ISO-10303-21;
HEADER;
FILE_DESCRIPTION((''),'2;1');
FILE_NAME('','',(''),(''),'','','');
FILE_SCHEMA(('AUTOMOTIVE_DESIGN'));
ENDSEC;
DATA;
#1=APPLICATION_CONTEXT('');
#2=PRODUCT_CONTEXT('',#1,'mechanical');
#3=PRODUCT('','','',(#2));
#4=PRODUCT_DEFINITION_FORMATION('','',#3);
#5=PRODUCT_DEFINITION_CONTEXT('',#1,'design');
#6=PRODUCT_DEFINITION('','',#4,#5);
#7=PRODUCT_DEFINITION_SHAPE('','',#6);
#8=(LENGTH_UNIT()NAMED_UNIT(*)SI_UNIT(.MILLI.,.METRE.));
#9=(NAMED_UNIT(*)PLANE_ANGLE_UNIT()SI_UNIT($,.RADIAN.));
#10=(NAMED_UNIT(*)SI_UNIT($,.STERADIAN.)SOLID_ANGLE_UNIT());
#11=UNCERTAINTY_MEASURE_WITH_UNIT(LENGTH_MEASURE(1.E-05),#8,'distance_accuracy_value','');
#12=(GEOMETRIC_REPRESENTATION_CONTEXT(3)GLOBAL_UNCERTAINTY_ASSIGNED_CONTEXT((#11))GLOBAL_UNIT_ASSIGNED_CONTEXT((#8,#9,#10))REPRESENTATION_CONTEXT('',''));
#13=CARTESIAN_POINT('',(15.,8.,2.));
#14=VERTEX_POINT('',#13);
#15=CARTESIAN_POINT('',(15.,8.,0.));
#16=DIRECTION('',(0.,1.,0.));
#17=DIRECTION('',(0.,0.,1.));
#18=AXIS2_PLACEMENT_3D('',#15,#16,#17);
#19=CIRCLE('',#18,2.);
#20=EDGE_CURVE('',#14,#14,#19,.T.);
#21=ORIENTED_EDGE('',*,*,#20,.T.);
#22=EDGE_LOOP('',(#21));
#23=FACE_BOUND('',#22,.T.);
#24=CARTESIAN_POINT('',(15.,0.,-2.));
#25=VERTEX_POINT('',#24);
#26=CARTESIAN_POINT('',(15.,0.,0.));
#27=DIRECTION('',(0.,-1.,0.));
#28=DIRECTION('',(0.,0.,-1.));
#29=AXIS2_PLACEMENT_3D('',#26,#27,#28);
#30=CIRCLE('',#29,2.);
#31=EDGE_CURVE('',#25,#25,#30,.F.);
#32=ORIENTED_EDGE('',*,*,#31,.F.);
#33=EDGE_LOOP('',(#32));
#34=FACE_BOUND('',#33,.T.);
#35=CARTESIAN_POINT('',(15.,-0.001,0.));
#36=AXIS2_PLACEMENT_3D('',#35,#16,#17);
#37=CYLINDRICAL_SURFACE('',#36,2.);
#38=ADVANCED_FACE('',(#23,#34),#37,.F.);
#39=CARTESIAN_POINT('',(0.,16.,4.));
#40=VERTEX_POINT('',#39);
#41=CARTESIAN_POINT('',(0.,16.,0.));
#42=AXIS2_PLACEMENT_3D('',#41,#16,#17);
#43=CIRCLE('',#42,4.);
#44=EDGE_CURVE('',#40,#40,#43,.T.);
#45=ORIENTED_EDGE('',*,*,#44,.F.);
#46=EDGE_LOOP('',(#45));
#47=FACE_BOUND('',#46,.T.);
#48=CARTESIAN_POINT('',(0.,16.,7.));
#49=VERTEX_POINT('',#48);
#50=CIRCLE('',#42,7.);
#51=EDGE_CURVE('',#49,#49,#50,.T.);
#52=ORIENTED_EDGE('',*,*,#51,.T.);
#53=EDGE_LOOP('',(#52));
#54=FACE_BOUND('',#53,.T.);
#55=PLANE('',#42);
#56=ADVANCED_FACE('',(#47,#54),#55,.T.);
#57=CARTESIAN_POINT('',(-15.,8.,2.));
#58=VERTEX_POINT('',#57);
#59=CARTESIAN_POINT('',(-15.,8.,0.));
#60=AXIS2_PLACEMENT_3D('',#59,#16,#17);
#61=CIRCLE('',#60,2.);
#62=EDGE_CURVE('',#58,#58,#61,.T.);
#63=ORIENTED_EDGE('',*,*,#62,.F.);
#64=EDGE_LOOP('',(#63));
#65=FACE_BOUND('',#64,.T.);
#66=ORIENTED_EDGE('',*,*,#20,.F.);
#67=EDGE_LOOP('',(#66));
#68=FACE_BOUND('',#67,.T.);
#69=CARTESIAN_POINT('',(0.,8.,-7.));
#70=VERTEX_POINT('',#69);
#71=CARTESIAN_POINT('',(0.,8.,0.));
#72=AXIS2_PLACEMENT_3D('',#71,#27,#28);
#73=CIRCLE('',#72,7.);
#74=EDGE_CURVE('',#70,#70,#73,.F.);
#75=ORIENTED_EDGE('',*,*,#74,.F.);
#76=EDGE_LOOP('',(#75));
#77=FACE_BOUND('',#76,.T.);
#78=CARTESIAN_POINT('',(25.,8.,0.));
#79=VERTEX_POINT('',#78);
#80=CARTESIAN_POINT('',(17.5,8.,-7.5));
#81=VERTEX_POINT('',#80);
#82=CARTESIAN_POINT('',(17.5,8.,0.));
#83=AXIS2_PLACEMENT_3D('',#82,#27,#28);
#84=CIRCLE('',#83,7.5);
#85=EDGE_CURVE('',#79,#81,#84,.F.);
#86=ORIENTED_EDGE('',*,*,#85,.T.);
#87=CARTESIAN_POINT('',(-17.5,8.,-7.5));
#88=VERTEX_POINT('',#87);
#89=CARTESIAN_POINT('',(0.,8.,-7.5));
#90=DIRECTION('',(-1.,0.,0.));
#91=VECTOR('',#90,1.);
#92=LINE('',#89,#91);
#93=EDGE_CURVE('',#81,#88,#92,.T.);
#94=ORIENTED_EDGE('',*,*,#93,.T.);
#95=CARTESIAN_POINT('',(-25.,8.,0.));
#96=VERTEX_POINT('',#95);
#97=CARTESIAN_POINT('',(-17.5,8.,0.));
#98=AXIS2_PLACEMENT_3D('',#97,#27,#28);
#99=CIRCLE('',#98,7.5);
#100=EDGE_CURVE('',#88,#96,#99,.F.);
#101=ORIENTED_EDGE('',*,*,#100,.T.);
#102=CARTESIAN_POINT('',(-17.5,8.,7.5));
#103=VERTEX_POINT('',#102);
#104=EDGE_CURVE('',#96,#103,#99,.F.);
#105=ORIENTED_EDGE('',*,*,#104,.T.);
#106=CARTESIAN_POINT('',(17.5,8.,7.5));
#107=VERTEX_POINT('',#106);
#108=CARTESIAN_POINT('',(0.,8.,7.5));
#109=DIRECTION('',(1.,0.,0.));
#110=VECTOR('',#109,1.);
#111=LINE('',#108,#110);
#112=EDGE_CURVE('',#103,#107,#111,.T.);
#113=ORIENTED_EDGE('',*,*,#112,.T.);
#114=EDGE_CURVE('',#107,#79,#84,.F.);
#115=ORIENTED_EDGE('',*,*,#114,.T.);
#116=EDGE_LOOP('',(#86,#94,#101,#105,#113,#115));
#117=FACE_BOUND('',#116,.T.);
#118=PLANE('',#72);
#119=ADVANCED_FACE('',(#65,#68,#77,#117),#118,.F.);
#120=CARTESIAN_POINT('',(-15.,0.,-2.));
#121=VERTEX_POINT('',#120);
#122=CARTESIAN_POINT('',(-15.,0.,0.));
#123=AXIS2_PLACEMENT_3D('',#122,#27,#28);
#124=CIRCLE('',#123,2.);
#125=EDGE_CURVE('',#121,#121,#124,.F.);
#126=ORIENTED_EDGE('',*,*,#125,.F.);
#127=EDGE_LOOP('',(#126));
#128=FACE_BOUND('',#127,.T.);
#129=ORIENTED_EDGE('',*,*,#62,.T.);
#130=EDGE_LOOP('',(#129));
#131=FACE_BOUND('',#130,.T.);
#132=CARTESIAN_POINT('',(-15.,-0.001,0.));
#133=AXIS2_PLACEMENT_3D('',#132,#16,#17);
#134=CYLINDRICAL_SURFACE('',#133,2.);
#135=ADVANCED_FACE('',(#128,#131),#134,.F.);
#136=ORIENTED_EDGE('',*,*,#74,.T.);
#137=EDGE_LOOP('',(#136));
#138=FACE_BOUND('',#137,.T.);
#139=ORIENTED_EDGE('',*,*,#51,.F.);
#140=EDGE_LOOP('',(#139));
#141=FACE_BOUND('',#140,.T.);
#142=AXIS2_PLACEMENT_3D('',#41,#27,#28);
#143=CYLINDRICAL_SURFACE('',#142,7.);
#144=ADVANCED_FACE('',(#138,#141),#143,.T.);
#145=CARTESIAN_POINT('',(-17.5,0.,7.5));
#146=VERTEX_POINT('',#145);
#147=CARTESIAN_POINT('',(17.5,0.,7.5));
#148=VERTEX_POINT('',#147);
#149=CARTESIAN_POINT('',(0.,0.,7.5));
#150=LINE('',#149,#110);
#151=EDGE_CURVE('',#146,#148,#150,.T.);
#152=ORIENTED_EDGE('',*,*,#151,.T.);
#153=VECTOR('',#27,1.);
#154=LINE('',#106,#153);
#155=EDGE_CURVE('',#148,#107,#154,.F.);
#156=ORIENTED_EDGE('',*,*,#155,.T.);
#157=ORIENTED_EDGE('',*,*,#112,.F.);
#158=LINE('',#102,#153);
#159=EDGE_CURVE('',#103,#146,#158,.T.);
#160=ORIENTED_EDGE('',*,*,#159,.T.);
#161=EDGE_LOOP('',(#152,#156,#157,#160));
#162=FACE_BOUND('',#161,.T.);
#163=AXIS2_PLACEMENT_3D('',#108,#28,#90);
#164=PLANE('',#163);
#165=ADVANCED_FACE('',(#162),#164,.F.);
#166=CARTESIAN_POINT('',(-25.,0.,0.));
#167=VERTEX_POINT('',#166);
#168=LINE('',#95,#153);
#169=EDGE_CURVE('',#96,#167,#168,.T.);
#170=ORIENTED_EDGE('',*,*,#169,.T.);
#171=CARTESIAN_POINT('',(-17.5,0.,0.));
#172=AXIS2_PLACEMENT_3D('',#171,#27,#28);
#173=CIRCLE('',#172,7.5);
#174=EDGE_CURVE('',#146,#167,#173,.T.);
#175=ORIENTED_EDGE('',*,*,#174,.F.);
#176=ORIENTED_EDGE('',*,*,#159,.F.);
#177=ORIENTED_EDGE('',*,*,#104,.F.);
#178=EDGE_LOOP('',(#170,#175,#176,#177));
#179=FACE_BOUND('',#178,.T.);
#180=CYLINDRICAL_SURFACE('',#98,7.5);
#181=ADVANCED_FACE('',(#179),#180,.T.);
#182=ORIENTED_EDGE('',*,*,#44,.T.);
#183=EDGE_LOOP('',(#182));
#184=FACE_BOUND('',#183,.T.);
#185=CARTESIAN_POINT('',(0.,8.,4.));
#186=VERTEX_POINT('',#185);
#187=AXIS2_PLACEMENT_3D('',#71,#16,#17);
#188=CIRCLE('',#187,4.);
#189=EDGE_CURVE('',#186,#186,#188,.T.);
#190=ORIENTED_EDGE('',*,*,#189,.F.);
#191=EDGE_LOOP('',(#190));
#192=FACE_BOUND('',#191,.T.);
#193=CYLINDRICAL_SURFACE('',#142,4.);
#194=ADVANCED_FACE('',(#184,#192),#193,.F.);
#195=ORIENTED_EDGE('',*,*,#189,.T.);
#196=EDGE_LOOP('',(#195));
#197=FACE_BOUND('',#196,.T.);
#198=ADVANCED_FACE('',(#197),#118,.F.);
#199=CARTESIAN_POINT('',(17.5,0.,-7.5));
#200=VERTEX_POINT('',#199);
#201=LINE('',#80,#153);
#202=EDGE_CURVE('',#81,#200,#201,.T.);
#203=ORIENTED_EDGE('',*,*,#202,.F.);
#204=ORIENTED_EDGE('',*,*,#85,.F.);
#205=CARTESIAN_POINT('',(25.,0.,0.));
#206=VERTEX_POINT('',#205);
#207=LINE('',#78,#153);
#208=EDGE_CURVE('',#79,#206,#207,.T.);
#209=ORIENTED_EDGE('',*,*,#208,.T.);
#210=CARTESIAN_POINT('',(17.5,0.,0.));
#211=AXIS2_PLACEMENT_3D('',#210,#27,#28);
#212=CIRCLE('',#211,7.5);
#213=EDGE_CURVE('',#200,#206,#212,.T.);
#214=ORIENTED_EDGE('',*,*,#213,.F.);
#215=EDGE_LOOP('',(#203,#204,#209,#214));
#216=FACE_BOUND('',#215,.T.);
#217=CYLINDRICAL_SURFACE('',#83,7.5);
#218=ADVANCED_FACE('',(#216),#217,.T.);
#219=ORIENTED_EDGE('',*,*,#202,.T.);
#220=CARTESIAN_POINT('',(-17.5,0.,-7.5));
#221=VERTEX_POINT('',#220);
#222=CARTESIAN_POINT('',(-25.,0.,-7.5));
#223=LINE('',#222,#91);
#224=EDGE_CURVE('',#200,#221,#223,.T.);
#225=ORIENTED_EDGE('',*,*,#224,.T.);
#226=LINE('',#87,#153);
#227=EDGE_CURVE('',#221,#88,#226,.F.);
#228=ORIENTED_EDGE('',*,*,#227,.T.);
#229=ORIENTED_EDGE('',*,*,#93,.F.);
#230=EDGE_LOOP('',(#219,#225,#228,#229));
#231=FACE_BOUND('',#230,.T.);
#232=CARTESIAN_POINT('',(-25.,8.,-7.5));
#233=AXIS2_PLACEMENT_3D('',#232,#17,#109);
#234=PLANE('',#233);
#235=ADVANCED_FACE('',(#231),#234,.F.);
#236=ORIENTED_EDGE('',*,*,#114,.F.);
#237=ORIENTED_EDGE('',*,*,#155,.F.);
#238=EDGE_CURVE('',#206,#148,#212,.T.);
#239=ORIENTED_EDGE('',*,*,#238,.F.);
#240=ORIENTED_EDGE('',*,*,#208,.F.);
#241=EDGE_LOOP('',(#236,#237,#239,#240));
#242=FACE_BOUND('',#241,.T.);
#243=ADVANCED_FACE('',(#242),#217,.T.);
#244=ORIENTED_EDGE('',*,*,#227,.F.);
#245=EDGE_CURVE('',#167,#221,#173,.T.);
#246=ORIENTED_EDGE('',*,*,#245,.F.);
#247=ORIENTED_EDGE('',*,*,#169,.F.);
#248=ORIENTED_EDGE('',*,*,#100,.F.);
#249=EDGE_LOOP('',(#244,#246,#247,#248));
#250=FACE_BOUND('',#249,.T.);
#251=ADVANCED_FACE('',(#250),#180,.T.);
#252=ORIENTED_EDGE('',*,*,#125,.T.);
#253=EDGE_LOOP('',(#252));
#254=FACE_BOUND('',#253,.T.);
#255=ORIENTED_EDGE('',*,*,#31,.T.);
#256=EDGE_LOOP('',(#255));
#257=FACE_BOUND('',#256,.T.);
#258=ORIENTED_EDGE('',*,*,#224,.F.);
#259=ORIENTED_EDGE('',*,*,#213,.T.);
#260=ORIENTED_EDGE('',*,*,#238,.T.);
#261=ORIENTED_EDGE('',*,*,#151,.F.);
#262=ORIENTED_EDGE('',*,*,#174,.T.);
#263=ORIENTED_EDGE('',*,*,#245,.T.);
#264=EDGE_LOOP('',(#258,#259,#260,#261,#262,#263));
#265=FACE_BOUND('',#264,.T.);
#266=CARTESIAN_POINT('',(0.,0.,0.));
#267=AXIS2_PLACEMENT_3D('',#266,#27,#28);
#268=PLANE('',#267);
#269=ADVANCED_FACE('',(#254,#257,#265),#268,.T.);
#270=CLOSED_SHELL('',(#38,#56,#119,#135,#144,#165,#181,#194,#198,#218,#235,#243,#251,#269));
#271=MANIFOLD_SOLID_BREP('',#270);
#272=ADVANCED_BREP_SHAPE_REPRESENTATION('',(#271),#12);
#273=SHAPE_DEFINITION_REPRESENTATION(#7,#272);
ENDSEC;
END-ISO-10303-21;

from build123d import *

# Parameters (mm, degrees)
BOSS_EXTRU_1_DEPTH      = 8
CONG_1_R                = 7.5
ENL_V_MAT_EXTRU_1_REACH = 29.299
ESQUISSE2_R             = 2
ESQUISSE3_R             = 7
ESQUISSE3_R_2           = 4
BOSS_EXTRU_2_DEPTH      = 8


with BuildPart() as part:
    # Esquisse1 → Boss.-Extru.1 (new body)
    with BuildSketch(Plane(origin=(0, 0, 0), x_dir=(1, 0, 0), z_dir=(0, 1, 0))):
        Polygon((0, -7.5), (25, -7.5), (25, 7.5), (0, 7.5), (-25, 7.5), (-25, -7.5), align=None)
    extrude(amount=BOSS_EXTRU_1_DEPTH)

    # Congé1
    cong_1_edges = [part.edges().sort_by_distance(p)[0] for p in [
        (-25, 4, 7.5),
        (-25, 4, -7.5),
        (25, 4, -7.5),
        (25, 4, 7.5),
    ]]
    fillet(cong_1_edges, radius=CONG_1_R - 0.0001)  # a hair under: the kernel refuses the full size

    # Esquisse2 → Enlèv. mat.-Extru.1 (cut, up to next)
    with BuildSketch(Plane(origin=(0, 8, 0), x_dir=(1, 0, 0), z_dir=(0, 1, 0)), mode=Mode.PRIVATE) as enl_v_mat_extru_1_sk1:
        with Locations(Location((-15, 0, 0), (0, 0, 270))):
            Circle(ESQUISSE2_R)
    enl_v_mat_extru_1_tool1 = extrude(enl_v_mat_extru_1_sk1.sketch, amount=-ENL_V_MAT_EXTRU_1_REACH, mode=Mode.PRIVATE) & part.part
    # Esquisse2 → Enlèv. mat.-Extru.1 (cut, up to next)
    with BuildSketch(Plane(origin=(0, 8, 0), x_dir=(1, 0, 0), z_dir=(0, 1, 0)), mode=Mode.PRIVATE) as enl_v_mat_extru_1_sk2:
        with Locations(Location((15, 0, 0), (0, 0, 270))):
            Circle(ESQUISSE2_R)
    enl_v_mat_extru_1_tool2 = extrude(enl_v_mat_extru_1_sk2.sketch, amount=-ENL_V_MAT_EXTRU_1_REACH, mode=Mode.PRIVATE) & part.part
    add(enl_v_mat_extru_1_tool1.solids().sort_by_distance((-15, 8, 0))[0], mode=Mode.SUBTRACT)
    add(enl_v_mat_extru_1_tool2.solids().sort_by_distance((15, 8, 0))[0], mode=Mode.SUBTRACT)

    # Esquisse3 → Boss.-Extru.2 (add)
    with BuildSketch(Plane(origin=(0, 8, 0), x_dir=(1, 0, 0), z_dir=(0, 1, 0))):
        with Locations(Location((0, 0, 0), (0, 0, 90))):
            Circle(ESQUISSE3_R)
        with Locations(Location((0, 0, 0), (0, 0, 270))):
            Circle(ESQUISSE3_R_2, mode=Mode.SUBTRACT)
    extrude(amount=BOSS_EXTRU_2_DEPTH)


solid = part.part
